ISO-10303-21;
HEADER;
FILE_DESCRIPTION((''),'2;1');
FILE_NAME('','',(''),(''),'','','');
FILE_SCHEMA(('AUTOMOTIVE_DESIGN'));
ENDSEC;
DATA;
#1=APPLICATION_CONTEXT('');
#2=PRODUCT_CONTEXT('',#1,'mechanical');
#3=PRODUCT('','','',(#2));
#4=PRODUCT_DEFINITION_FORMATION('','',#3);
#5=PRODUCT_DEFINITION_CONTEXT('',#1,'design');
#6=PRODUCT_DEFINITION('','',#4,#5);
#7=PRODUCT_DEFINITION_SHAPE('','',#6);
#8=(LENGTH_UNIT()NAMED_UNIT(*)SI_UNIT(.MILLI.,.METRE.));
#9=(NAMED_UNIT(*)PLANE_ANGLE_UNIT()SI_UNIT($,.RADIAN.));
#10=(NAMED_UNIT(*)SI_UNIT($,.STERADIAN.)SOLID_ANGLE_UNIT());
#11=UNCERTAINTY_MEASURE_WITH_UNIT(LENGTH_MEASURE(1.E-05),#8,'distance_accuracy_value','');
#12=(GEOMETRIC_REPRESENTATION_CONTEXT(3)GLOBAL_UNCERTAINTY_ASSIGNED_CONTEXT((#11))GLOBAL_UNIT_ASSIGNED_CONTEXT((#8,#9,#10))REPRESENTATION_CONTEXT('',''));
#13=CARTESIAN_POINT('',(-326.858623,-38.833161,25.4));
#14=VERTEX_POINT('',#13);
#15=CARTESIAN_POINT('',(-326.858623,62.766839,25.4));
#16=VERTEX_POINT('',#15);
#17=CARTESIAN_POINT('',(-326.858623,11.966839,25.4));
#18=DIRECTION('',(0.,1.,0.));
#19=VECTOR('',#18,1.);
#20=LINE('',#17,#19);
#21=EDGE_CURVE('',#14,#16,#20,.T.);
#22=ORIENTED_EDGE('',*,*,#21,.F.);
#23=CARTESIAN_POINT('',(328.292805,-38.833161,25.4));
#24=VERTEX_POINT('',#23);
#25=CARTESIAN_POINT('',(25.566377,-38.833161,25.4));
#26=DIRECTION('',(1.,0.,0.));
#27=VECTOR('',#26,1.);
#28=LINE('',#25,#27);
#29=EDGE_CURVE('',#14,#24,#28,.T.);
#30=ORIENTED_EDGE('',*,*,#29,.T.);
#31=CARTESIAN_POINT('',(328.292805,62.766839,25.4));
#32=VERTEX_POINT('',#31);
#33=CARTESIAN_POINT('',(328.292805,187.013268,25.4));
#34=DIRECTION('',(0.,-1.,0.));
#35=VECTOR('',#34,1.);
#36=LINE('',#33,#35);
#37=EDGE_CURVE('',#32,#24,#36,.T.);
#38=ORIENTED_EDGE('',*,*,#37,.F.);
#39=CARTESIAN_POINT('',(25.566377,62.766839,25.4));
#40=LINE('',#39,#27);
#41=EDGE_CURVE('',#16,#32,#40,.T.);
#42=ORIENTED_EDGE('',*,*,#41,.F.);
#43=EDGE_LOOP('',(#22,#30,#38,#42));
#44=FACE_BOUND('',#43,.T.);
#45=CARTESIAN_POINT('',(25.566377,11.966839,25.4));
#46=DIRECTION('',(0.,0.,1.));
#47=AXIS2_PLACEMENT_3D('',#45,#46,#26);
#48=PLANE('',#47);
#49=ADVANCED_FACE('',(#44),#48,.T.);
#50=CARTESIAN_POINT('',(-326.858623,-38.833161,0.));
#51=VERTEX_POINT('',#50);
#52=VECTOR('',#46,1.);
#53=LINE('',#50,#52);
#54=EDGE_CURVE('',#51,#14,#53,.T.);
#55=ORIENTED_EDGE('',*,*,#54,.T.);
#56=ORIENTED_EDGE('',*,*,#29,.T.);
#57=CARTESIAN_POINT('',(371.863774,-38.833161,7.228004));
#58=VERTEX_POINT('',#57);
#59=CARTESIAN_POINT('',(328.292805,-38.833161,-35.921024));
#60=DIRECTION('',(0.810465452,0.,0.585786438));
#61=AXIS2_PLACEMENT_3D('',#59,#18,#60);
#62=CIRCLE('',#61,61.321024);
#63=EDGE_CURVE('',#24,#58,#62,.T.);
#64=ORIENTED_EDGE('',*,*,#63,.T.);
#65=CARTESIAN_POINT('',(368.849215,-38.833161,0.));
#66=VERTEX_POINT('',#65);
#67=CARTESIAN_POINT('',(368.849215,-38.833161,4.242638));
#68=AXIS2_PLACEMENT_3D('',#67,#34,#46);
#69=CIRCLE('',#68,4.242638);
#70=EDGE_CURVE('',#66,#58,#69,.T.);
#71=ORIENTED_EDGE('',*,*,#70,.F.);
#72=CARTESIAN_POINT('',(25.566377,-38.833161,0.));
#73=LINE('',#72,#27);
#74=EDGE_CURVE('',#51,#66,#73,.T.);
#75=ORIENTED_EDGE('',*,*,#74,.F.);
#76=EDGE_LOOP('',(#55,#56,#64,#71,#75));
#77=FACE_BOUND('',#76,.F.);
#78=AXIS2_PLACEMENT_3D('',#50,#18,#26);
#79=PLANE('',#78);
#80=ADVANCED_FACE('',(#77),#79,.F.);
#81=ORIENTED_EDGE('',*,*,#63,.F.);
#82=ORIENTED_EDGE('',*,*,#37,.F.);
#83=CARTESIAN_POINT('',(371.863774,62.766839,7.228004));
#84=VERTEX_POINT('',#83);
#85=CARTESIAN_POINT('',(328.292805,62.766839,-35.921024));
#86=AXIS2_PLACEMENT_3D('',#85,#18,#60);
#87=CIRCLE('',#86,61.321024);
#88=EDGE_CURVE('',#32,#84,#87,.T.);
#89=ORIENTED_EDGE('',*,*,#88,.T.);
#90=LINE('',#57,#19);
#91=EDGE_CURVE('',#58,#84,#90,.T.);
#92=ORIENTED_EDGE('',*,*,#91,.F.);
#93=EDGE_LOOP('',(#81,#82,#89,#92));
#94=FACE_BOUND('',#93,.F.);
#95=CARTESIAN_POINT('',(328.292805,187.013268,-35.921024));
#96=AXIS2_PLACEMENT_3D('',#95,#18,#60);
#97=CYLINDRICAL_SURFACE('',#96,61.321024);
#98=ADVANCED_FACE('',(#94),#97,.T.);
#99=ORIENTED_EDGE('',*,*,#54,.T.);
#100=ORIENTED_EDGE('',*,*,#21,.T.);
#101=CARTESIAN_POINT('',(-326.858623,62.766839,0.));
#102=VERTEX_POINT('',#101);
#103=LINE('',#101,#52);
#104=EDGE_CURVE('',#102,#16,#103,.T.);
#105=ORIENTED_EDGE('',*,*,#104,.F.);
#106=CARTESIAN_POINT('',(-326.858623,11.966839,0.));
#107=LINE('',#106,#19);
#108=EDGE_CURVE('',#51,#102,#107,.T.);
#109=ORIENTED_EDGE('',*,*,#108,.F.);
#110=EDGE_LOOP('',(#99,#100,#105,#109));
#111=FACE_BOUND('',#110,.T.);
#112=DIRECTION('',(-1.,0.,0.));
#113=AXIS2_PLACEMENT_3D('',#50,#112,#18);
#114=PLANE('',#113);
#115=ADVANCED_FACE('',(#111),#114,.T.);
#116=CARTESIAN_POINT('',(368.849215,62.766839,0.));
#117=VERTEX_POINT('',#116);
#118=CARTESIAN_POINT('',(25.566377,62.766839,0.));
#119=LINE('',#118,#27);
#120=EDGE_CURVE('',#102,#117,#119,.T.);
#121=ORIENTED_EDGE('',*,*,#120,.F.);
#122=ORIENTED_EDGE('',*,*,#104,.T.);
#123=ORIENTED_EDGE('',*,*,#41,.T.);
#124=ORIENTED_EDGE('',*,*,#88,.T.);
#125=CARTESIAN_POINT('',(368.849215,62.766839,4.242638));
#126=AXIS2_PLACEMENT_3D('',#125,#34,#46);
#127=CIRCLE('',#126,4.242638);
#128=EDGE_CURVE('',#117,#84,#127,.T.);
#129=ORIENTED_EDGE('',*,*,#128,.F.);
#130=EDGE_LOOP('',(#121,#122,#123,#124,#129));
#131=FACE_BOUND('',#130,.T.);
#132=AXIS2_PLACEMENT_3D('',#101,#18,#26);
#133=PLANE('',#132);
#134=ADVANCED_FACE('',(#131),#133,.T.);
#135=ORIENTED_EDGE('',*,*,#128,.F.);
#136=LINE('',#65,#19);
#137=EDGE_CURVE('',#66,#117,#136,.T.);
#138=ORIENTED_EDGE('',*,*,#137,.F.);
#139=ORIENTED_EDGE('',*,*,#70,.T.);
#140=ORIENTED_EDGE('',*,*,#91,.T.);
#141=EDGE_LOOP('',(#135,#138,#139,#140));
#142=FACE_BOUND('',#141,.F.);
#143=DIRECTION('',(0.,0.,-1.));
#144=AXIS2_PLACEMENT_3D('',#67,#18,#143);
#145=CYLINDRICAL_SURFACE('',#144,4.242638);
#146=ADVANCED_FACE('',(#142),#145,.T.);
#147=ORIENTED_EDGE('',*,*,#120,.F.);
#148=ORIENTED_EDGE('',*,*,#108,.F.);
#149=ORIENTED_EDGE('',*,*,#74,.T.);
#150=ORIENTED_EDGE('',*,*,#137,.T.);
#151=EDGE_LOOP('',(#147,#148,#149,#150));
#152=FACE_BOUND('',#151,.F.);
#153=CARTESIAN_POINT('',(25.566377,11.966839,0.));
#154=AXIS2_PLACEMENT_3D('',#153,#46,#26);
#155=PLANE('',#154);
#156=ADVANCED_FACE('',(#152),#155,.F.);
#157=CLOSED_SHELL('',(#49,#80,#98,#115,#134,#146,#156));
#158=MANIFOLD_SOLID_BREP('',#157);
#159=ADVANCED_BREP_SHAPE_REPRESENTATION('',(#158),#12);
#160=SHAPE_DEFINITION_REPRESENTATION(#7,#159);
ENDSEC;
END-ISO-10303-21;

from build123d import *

# Parameters (mm, degrees)
F0_W        = 704.85
F0_H        = 101.6
F1_DEPTH    = 25.4
F2_T1_DEPTH = 350.0928592435
F3_R        = 4.2426380505


# Not quite as in the source:
# - a fillet or chamfer that OpenCascade refuses, or shapes differently, is made with other operations: its cross-section is extruded or revolved along the edge and cut away or added


with BuildPart() as f1:
    # F0 (on Top) → F1 (new body)
    with BuildSketch(Plane.XY):
        with Locations((25.5663767457, 11.9668386396)):
            Rectangle(F0_W, F0_H)
    extrude(amount=F1_DEPTH)

    # F2: fillet of radius 61.3210244843 on 1 edges, made by hand

    # F2_s2 → F2_t1 (cut)
    with BuildSketch(Plane.XZ.offset(-187.0132682614)):
        with BuildLine():
            ThreePointArc((377.9913767457, 0), (356.1993813791, 18.6820068679), (328.292804897, 25.4))
            Line((328.292804897, 25.4), (377.9913767457, 25.4))
            Line((377.9913767457, 25.4), (377.9913767457, 0))
        make_face()
    extrude(amount=F2_T1_DEPTH, mode=Mode.SUBTRACT)

    # F3
    f3_edges = [f1.edges().sort_by_distance(p)[0] for p in [
        (377.991377, 11.966839, 0),
    ]]
    fillet(f3_edges, radius=F3_R)


solid = f1.part
